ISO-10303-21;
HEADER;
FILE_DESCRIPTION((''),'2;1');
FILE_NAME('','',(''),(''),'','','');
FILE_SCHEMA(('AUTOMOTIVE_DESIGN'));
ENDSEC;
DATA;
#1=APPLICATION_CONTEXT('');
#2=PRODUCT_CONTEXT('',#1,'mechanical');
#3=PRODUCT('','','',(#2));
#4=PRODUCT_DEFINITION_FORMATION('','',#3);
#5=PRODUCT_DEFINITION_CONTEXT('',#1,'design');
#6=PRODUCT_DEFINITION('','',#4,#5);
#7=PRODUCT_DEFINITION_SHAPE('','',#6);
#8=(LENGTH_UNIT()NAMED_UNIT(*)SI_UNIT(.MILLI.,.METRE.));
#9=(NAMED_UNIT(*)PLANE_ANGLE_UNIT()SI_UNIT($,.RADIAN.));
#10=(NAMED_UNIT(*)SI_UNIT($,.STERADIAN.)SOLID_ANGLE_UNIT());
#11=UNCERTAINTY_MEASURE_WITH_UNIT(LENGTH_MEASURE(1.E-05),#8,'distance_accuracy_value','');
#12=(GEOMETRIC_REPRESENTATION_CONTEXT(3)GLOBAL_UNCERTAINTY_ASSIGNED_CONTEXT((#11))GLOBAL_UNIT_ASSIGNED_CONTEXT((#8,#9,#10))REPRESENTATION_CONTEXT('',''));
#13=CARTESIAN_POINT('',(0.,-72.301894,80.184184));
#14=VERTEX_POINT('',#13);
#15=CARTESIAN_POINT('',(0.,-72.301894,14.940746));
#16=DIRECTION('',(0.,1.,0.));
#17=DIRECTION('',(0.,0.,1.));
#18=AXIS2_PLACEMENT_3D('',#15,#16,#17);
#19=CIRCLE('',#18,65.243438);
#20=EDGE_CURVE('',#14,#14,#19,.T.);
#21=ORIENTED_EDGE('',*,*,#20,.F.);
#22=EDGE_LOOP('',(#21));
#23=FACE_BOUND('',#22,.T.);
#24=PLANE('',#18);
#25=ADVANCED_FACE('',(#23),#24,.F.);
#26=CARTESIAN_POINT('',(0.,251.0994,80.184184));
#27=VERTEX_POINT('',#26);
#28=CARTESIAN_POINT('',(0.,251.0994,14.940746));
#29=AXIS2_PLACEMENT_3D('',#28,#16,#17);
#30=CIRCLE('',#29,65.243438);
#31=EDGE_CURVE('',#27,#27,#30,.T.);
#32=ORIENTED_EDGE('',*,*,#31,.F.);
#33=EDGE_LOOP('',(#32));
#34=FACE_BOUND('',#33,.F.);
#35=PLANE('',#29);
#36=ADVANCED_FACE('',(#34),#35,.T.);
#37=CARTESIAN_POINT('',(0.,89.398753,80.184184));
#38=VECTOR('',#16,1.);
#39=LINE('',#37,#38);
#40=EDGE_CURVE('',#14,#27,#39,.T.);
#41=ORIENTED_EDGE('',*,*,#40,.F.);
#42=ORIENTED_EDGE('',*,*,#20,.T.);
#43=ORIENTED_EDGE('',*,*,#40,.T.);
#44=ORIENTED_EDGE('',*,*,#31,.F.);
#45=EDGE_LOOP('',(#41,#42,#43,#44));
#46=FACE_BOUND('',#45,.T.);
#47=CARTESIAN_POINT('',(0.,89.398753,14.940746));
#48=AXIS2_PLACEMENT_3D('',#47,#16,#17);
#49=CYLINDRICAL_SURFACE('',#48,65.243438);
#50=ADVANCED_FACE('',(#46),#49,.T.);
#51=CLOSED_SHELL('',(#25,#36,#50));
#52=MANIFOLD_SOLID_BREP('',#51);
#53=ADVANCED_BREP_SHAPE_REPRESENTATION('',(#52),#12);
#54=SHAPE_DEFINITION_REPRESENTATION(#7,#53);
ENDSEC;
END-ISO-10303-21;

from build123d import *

# Parameters (mm, degrees)
F1_W = 323.4012946486
F1_H = 65.2434378862


# Not quite as in the source:
# - a feature names something its author has since deleted; it is built from what else it names


with BuildPart() as f2:
    # F1 (on face) → F2 (revolve)
    with BuildSketch(Plane.YZ):
        with Locations((89.398752898, 47.5624650717)):
            Rectangle(F1_W, F1_H)
    revolve(axis=Axis((0, 89.398752898, 14.9407461286), (0, 1, 0)))


solid = f2.part
